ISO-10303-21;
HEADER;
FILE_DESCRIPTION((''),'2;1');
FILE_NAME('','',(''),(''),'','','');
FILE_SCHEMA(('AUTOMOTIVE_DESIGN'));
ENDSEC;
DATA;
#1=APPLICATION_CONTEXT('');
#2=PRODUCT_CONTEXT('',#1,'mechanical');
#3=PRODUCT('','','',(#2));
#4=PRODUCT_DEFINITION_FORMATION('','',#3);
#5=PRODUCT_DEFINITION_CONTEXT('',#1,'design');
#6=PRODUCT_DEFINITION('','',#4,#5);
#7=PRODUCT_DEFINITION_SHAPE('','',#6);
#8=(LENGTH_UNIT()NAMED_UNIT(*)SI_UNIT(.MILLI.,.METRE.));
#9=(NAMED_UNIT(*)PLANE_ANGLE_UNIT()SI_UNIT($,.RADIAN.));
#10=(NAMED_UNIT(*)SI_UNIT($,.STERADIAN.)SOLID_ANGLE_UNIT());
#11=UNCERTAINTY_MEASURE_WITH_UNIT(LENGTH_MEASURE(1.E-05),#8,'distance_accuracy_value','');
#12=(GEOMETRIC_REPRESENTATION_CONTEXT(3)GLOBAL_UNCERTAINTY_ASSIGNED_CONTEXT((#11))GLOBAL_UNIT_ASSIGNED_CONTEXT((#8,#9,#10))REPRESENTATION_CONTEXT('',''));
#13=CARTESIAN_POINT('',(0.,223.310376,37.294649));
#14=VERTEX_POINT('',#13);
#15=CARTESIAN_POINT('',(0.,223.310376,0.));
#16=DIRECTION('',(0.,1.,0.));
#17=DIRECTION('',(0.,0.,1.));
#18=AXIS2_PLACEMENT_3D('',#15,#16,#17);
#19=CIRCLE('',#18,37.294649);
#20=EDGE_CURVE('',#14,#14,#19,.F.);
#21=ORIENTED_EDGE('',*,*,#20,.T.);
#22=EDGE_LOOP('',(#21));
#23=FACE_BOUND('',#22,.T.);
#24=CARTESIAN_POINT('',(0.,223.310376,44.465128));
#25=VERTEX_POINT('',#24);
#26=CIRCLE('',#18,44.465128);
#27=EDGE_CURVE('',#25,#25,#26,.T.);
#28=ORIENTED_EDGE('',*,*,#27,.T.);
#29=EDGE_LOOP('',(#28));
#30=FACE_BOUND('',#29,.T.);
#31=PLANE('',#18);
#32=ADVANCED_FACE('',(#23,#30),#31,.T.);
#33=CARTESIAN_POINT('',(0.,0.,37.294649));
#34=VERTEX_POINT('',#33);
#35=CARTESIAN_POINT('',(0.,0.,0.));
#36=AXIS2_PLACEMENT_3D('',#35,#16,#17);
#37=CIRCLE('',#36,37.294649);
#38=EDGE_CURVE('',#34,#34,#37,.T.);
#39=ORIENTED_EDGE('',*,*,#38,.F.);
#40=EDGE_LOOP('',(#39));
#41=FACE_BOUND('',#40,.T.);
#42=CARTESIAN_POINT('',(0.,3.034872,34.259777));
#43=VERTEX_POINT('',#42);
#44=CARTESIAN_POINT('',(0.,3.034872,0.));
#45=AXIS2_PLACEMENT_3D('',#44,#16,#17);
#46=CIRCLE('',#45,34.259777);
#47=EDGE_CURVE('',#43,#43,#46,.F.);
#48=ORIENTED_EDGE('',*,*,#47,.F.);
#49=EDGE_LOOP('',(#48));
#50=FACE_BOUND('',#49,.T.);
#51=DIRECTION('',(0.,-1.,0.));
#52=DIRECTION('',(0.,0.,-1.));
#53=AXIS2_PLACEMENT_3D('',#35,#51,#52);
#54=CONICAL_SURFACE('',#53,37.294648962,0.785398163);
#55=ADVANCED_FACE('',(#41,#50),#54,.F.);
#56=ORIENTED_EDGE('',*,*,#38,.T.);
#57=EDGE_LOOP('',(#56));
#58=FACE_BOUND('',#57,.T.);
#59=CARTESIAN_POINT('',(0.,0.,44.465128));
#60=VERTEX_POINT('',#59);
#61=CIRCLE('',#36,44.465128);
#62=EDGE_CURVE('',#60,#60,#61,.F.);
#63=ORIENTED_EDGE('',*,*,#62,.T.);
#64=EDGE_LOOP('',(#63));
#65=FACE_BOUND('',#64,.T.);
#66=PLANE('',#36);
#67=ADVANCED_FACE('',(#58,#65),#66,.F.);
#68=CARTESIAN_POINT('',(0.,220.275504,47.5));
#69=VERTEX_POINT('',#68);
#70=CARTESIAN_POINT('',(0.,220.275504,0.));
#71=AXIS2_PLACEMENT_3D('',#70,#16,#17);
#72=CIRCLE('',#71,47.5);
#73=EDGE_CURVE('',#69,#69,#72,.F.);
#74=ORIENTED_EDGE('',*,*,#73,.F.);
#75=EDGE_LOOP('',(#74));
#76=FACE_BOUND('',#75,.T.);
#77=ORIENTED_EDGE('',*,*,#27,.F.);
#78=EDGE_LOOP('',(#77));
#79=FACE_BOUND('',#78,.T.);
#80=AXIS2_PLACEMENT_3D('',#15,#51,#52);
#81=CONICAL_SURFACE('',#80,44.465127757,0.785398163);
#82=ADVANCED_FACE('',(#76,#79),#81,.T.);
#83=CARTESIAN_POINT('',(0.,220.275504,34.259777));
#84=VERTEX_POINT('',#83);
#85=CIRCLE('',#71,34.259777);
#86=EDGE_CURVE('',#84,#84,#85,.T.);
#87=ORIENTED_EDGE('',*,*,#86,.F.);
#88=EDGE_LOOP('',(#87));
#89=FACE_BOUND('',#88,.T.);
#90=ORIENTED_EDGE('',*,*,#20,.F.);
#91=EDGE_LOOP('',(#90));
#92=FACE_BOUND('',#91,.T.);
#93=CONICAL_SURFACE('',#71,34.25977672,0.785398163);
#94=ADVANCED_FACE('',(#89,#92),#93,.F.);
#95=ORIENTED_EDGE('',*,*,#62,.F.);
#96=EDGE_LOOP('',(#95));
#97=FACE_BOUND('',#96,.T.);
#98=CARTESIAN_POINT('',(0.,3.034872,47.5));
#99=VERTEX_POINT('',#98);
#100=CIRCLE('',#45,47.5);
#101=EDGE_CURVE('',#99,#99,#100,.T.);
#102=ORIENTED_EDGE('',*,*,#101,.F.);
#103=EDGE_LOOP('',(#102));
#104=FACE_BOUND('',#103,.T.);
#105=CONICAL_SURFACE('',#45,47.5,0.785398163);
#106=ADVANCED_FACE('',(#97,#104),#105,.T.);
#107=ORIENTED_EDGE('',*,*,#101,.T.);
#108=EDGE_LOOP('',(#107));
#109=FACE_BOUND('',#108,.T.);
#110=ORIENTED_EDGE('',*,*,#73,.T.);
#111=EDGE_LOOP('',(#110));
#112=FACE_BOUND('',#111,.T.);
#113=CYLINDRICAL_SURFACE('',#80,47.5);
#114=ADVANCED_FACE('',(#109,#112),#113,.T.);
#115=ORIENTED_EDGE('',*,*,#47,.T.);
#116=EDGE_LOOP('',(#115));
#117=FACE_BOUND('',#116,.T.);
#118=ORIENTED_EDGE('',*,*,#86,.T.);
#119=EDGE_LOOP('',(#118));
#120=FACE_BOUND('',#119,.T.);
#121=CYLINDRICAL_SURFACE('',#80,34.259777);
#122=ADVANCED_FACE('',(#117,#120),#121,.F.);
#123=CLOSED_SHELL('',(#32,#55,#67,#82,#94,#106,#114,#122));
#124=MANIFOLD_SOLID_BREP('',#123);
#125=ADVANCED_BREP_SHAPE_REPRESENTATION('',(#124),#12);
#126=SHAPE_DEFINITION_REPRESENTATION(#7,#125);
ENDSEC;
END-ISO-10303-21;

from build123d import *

# Parameters (mm, degrees)
SKETCH1_R           = 47.5
BOSS_EXTRUDE1_DEPTH = 223.31037629
SKETCH2_R           = 34.25977672
CUT_EXTRUDE1_DEPTH  = 234.195249006
CHAMFER1_SIZE       = 3.034872243


with BuildPart() as part:
    # Sketch1 → Boss-Extrude1 (new body)
    with BuildSketch(Plane(origin=(0, 0, 0), x_dir=(1, 0, 0), z_dir=(0, 1, 0))):
        Circle(SKETCH1_R)
    extrude(amount=BOSS_EXTRUDE1_DEPTH)

    # Sketch2 → Cut-Extrude1 (cut, through all)
    with BuildSketch(Plane(origin=(0, 0, 0), x_dir=(1, 0, 0), z_dir=(0, 1, 0))):
        Circle(SKETCH2_R)
    extrude(amount=CUT_EXTRUDE1_DEPTH, mode=Mode.SUBTRACT)

    # Chamfer1
    chamfer1_edges = [part.edges().sort_by_distance(p)[0] for p in [
        (-34.25977672, 223.31037629, 0),
        (-34.25977672, 0, 0),
        (-47.5, 0, 0),
        (-47.5, 223.31037629, 0),
    ]]
    chamfer(chamfer1_edges, length=CHAMFER1_SIZE)


solid = part.part
